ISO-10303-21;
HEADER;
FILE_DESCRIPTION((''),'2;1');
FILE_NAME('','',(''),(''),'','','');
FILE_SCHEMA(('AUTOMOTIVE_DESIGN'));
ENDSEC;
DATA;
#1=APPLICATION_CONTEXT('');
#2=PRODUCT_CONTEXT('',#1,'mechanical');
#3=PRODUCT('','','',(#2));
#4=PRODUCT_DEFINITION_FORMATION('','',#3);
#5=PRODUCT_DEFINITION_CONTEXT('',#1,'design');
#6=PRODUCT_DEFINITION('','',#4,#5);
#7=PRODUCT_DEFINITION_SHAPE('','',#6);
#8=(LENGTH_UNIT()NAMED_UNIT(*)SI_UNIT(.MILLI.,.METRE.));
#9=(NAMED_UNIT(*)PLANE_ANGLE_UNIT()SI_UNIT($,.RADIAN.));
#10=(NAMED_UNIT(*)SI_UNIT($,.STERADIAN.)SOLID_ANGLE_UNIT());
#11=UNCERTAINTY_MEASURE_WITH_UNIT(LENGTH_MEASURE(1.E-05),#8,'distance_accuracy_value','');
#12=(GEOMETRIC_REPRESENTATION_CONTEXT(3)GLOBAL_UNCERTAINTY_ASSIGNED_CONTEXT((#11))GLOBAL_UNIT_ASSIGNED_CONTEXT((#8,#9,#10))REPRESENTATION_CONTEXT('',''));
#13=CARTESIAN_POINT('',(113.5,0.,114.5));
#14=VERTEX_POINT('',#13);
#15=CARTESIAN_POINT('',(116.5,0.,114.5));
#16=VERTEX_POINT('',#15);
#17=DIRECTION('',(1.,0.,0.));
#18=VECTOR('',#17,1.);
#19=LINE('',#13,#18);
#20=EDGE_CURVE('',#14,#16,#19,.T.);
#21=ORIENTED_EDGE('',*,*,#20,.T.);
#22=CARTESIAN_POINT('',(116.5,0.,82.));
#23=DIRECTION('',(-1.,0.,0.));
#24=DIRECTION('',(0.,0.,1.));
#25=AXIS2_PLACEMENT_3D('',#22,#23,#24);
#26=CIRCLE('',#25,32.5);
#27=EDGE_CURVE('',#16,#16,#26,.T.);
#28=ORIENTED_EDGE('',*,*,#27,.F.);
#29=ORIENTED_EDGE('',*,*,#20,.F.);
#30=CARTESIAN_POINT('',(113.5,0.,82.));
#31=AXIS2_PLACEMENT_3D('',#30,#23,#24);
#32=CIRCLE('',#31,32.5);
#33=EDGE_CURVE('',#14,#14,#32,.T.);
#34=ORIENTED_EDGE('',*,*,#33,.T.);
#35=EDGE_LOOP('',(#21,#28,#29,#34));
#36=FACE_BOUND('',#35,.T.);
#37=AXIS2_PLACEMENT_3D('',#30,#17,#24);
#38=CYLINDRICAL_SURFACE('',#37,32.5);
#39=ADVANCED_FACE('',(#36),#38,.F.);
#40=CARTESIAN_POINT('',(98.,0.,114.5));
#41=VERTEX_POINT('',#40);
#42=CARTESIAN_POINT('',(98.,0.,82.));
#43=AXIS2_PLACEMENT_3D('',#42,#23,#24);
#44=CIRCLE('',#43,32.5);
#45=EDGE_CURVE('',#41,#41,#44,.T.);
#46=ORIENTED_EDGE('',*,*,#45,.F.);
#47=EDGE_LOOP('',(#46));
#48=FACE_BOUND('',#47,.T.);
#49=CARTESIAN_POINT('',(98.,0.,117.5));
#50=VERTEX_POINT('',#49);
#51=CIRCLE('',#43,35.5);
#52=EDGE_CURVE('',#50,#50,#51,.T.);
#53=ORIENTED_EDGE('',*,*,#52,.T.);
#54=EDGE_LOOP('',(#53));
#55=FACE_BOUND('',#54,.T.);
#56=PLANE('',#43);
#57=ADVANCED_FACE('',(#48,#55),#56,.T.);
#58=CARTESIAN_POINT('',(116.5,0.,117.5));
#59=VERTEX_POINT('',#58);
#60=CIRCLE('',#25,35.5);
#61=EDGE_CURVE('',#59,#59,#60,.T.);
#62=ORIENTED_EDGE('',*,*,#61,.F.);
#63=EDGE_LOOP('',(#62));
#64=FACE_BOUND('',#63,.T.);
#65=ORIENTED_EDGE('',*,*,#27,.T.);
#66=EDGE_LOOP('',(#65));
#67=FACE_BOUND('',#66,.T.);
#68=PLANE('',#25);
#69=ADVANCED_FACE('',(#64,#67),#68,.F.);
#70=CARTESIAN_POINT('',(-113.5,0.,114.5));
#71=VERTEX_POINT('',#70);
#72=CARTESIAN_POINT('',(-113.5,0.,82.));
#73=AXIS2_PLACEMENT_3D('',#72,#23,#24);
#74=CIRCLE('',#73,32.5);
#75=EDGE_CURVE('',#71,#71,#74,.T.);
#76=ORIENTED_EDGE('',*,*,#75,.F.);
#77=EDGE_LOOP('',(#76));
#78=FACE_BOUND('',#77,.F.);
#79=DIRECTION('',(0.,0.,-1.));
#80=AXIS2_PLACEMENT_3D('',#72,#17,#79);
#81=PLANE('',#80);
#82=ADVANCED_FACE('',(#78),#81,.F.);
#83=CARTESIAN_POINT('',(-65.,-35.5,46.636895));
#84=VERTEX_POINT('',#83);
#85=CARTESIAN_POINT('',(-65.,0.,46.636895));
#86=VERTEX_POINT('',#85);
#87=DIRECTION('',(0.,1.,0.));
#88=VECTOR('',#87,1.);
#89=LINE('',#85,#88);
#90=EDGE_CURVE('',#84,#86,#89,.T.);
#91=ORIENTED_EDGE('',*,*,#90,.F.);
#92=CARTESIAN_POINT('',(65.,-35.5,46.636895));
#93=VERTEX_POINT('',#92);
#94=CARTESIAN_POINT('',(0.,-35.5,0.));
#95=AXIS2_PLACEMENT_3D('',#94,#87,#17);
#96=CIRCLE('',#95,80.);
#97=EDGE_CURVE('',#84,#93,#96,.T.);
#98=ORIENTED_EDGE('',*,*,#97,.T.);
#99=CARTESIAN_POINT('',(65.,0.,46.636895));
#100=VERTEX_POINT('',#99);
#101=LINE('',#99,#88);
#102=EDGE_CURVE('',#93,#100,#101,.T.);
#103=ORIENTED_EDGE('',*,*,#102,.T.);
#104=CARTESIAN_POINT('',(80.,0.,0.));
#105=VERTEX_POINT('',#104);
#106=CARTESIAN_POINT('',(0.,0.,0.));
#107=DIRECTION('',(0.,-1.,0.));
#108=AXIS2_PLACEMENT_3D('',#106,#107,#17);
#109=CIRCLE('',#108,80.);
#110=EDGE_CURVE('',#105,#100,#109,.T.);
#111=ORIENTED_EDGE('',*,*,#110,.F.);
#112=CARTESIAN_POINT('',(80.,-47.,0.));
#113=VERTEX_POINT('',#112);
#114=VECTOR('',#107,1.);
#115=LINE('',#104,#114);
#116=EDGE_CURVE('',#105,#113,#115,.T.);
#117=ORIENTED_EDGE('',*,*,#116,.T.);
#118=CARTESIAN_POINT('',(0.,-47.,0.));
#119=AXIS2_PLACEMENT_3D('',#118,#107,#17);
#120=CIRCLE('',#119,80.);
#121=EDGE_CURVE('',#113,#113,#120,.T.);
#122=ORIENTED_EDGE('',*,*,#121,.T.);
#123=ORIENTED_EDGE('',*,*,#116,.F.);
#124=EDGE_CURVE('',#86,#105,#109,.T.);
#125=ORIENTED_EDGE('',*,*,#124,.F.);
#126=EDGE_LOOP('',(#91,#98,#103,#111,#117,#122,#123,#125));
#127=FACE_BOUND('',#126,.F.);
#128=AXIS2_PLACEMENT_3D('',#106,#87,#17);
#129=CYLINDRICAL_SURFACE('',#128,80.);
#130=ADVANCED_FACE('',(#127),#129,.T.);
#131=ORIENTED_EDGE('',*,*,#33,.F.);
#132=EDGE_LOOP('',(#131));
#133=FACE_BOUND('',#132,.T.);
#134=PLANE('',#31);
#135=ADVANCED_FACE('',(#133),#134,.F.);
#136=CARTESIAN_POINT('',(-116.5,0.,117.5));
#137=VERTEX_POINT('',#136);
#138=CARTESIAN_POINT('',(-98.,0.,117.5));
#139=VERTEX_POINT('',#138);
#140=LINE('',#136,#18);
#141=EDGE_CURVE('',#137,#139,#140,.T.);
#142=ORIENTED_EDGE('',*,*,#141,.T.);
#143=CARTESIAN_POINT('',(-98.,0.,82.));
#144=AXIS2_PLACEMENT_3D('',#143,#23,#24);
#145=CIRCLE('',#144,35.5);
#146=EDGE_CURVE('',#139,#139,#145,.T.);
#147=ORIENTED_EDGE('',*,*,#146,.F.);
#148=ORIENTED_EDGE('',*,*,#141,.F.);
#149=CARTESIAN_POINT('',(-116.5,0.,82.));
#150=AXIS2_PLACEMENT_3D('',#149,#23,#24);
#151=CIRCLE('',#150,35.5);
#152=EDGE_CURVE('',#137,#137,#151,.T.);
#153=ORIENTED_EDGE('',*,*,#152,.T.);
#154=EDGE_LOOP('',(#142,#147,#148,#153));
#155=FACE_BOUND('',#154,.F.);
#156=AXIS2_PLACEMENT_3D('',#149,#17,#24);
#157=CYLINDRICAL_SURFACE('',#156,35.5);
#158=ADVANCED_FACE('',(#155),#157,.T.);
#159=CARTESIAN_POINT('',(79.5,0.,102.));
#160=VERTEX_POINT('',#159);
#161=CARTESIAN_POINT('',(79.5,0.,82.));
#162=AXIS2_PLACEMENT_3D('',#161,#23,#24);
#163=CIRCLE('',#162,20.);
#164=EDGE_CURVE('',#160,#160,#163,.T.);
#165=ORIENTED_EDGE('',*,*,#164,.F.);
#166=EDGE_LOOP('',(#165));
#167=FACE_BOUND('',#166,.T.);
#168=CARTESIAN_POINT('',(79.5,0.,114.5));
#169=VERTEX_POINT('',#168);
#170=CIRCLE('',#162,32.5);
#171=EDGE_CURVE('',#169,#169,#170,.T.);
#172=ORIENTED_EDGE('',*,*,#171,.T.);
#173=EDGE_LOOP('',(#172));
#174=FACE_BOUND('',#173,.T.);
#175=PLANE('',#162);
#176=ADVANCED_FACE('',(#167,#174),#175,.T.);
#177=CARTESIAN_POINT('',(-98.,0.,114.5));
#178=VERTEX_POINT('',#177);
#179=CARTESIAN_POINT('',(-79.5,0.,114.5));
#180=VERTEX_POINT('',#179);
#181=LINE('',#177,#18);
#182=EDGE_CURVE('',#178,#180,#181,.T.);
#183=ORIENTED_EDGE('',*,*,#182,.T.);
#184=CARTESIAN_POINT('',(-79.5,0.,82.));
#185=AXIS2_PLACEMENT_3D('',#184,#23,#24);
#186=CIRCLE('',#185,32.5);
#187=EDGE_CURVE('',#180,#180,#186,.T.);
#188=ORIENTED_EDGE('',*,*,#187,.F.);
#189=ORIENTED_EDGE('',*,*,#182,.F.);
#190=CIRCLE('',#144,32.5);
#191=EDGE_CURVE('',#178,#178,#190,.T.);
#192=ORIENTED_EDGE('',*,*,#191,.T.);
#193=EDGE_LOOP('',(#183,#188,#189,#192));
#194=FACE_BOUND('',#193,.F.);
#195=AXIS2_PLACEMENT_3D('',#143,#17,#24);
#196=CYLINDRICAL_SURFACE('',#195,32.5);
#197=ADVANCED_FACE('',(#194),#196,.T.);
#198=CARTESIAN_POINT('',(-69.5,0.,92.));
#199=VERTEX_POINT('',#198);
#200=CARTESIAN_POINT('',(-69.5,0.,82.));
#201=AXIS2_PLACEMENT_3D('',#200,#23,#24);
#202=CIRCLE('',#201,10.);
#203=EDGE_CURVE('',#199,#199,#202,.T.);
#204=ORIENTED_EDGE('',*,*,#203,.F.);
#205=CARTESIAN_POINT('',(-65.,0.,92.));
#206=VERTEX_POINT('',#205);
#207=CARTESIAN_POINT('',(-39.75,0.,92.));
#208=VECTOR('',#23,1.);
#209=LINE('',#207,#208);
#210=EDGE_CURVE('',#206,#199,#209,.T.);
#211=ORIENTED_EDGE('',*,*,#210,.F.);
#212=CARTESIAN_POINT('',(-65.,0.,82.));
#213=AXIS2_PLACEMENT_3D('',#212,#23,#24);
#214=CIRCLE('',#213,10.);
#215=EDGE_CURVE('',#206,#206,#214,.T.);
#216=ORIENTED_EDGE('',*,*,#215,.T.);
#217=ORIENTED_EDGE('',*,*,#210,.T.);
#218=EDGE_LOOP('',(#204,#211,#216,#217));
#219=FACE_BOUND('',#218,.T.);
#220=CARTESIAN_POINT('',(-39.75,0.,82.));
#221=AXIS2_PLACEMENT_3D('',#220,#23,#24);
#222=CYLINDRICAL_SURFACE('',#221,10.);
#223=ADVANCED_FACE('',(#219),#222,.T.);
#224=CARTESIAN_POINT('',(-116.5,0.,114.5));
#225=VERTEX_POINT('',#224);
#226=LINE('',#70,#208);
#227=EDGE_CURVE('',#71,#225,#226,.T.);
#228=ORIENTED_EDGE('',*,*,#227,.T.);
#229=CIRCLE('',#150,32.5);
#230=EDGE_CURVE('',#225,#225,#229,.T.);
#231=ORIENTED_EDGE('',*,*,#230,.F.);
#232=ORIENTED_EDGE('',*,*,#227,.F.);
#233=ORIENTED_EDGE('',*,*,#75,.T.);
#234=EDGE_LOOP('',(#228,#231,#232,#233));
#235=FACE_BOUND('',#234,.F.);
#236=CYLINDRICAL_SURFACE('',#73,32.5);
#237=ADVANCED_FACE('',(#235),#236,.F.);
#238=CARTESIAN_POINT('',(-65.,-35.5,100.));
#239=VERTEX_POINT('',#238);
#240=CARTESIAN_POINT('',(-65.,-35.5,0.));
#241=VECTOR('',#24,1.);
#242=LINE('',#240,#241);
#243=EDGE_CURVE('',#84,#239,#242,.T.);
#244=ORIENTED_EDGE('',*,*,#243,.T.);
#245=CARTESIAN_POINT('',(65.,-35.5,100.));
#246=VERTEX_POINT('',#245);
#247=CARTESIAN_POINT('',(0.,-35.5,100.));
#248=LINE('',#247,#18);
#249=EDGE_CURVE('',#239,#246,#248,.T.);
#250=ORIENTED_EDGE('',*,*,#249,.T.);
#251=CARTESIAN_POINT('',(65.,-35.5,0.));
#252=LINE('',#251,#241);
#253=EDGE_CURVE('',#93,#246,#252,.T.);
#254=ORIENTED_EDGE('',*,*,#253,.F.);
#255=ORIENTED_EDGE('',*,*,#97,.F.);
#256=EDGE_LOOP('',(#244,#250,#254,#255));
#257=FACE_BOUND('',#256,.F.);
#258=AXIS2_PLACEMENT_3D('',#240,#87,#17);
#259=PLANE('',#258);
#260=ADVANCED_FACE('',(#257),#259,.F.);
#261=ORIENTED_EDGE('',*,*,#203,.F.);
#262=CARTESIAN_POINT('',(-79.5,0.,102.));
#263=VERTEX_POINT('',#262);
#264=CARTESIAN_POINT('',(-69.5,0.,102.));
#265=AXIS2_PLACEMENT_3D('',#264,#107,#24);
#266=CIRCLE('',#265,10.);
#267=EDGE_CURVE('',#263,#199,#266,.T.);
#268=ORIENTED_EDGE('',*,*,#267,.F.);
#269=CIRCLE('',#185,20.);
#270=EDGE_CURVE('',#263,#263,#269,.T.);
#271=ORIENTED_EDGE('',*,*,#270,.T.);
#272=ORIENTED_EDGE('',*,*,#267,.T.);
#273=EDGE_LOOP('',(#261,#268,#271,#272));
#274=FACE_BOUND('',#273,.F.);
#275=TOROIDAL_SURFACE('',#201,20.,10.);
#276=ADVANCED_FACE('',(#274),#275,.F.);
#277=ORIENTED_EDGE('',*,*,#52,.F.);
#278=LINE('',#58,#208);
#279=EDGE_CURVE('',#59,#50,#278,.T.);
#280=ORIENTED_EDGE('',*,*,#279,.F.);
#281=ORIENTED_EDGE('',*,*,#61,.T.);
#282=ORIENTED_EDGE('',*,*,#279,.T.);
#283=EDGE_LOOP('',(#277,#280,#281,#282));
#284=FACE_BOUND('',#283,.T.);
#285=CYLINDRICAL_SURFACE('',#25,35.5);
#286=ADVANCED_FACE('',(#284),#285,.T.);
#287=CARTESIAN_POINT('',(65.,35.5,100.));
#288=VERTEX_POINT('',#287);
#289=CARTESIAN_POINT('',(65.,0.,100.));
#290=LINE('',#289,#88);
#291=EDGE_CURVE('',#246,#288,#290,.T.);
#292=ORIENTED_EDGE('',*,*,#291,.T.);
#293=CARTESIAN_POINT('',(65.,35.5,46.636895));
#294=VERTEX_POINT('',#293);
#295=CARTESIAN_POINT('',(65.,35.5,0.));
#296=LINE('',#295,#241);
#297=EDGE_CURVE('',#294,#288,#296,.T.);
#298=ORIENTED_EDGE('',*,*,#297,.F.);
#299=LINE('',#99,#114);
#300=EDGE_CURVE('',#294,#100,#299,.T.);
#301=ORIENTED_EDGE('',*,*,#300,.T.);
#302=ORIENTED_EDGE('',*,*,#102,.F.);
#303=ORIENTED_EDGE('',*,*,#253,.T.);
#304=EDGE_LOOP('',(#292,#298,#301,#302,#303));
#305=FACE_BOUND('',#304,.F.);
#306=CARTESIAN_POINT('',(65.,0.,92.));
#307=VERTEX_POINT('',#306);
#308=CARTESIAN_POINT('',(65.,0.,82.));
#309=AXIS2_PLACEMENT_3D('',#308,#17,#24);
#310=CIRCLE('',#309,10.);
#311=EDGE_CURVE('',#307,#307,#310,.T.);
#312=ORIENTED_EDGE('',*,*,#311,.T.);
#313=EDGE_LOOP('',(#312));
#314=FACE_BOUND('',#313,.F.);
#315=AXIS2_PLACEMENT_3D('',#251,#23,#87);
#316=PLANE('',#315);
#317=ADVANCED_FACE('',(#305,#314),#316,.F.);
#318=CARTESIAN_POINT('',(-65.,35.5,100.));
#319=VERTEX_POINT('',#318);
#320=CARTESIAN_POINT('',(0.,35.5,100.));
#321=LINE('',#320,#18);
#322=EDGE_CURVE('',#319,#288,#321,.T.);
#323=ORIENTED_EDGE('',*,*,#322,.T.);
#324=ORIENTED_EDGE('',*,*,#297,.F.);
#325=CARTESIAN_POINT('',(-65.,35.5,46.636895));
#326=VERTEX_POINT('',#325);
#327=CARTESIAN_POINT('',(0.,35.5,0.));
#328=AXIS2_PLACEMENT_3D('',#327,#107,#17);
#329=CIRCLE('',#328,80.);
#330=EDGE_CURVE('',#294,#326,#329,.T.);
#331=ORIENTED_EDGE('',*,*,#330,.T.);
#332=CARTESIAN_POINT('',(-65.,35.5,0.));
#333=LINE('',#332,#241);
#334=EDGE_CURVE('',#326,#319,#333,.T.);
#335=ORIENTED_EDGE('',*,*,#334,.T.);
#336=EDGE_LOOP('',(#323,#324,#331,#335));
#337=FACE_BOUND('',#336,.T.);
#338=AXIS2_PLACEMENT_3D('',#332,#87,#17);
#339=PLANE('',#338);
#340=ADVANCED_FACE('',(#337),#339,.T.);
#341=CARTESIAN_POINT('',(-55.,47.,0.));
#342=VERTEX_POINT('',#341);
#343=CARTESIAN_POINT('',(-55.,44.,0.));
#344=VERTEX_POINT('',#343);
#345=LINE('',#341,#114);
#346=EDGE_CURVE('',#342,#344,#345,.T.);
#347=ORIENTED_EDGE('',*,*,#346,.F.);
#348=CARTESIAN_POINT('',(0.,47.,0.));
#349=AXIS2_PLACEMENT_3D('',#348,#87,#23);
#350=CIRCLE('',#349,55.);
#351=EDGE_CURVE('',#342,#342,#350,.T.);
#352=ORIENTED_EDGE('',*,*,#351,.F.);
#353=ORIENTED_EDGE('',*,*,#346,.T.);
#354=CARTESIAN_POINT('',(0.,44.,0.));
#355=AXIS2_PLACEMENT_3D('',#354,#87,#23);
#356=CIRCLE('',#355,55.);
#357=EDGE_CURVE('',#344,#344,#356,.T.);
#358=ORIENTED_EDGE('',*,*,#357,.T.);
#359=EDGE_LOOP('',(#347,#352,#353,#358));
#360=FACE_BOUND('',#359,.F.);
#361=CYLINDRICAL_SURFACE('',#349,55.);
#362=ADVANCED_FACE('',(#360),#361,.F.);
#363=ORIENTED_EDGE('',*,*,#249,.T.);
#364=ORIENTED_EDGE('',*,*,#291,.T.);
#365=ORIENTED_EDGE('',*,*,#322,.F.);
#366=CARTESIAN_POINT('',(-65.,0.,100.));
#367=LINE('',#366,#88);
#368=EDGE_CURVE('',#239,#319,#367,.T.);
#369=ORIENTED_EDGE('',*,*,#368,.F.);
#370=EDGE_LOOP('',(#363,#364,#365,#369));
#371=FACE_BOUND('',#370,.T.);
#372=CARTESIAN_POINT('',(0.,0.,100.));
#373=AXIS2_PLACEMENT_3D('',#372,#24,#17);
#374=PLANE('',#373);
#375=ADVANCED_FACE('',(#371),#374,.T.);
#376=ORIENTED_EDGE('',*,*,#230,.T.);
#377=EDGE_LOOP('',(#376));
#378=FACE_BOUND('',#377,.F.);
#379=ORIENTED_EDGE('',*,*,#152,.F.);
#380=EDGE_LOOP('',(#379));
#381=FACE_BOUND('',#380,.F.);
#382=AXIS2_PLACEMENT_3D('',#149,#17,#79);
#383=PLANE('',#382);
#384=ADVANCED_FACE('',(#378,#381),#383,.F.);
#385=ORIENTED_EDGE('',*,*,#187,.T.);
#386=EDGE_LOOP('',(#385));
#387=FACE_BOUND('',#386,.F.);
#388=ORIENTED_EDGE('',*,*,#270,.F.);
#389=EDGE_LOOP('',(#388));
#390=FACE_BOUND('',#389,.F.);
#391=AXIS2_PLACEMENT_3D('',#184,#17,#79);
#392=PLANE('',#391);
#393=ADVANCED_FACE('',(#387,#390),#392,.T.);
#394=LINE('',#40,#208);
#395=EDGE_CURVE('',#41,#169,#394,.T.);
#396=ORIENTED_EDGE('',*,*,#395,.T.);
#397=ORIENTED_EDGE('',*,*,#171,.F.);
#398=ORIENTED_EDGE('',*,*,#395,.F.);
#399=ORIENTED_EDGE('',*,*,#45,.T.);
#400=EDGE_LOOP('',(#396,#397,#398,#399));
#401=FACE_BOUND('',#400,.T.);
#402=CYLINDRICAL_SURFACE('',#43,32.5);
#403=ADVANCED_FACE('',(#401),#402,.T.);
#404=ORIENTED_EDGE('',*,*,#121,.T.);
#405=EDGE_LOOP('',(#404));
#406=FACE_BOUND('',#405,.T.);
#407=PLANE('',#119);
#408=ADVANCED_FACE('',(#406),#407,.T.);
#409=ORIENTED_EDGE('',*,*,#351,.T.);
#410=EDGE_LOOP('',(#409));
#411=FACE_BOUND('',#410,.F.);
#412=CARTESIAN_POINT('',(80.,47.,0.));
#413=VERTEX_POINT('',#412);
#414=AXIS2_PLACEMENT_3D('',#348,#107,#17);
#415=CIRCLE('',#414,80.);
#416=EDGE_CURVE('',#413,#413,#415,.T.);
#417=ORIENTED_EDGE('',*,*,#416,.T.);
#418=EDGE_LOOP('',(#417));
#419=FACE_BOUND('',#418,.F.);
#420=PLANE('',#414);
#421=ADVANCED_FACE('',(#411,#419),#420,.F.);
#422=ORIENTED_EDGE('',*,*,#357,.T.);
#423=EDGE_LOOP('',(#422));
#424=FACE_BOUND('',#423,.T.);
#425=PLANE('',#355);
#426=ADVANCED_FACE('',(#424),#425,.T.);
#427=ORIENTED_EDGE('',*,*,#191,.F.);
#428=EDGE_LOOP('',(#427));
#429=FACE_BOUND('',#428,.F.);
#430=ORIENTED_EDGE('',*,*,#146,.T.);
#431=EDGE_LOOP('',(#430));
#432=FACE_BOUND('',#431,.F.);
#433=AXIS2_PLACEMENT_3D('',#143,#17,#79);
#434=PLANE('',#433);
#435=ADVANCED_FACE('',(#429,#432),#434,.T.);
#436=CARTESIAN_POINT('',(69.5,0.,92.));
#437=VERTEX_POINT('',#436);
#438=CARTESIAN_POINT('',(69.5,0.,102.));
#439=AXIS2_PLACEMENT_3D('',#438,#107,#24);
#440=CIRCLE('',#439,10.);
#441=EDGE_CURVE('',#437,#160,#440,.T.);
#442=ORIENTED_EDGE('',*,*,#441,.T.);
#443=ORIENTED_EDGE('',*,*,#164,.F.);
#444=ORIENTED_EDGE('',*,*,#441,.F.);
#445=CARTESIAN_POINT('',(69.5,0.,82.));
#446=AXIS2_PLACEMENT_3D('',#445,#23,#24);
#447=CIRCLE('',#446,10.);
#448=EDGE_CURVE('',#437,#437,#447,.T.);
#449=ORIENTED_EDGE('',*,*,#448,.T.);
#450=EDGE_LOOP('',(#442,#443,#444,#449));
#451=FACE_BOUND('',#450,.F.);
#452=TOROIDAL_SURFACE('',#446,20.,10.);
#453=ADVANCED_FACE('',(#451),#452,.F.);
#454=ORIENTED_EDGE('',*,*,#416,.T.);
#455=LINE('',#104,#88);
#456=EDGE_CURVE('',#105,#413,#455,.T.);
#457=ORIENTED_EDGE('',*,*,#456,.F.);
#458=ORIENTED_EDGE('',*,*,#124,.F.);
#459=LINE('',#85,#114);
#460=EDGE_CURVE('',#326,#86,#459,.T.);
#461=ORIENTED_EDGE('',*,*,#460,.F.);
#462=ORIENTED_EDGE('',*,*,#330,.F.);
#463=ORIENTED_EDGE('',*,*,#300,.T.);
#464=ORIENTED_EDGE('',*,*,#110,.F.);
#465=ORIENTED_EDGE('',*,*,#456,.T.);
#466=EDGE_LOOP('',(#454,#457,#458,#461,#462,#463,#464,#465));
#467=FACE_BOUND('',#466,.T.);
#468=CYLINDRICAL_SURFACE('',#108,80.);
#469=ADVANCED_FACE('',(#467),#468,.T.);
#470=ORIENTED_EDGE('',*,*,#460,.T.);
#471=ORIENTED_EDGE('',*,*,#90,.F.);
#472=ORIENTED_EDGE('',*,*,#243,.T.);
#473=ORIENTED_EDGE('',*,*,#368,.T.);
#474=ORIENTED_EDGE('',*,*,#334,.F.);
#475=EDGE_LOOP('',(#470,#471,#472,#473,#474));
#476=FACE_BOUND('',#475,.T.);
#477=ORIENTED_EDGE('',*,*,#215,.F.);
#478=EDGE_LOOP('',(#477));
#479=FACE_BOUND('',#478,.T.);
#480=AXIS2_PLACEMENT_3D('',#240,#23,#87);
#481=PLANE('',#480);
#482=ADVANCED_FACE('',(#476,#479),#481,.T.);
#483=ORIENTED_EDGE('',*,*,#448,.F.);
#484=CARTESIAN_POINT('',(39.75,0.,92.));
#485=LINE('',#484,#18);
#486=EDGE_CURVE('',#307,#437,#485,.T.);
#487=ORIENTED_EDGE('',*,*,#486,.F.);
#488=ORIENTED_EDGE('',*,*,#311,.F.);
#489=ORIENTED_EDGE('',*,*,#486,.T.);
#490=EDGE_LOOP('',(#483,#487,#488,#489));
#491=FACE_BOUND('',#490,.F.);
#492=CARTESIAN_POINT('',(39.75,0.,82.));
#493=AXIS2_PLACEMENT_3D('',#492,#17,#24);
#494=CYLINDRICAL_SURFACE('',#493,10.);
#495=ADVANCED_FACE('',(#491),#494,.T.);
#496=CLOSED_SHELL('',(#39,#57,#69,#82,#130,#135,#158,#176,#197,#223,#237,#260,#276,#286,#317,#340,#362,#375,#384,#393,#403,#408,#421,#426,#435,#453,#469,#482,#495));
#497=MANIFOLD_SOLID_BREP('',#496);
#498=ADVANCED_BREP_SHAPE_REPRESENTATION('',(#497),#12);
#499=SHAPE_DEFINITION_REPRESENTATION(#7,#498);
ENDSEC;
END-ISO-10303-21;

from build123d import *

# Parameters (mm, degrees)
F0_R      = 80
F1_DEPTH  = 47
F2_W      = 130
F2_H      = 71
F3_DEPTH  = 100
F4_W      = 79.5
F4_H      = 10
F6_R      = 10
F7_R      = 80
F8_DEPTH  = 47
F9_R      = 55
F10_DEPTH = 3


# Not quite as in the source:
# - a pattern or mirror of a feature is missing from the dataset's text; its kind, count and spacing are read off the source's solid


with BuildPart() as f1:
    # F0 (on Front) → F1 (new body)
    with BuildSketch(Plane.XZ):
        Circle(F0_R)
    extrude(amount=F1_DEPTH)

    # F2 (on Top) → F3 (join)
    with BuildSketch(Plane.XY):
        Rectangle(F2_W, F2_H)
    extrude(amount=F3_DEPTH)

    # F4 (on Front) → F5 (revolve)
    with BuildSketch(Plane.XZ):
        Polygon((79.5, 114.5), (79.5, 92), (79.5, 82), (113.5, 82), (113.5, 114.5), (116.5, 114.5), (116.5, 117.5), (98, 117.5), (98, 114.5), align=None)
        with Locations((39.75, 87)):
            Rectangle(F4_W, F4_H)
    f5 = revolve(axis=Axis((96.5, 0, 82), (-1, 0, 0)))

    # F5_copies: F5 across plane
    add(f5.mirror(Plane(origin=(0, 0, 0), x_dir=(0, 0, -1), z_dir=(-1, 0, 0))))

    # F6
    f6_edges = [f1.edges().sort_by_distance(p)[0] for p in [
        (79.5, 0, 72),
        (-79.5, 0, 72),
    ]]
    fillet(f6_edges, radius=F6_R)

    # F7 (on Front) → F8 (join)
    with BuildSketch(Plane.XZ):
        Circle(F7_R)
    extrude(amount=-F8_DEPTH)

    # F9 (on face) → F10 (cut)
    with BuildSketch(Plane(origin=(0, 47, 0), x_dir=(-1, 0, 0), z_dir=(0, 1, 0))):
        Circle(F9_R)
    extrude(amount=-F10_DEPTH, mode=Mode.SUBTRACT)


solid = f1.part
